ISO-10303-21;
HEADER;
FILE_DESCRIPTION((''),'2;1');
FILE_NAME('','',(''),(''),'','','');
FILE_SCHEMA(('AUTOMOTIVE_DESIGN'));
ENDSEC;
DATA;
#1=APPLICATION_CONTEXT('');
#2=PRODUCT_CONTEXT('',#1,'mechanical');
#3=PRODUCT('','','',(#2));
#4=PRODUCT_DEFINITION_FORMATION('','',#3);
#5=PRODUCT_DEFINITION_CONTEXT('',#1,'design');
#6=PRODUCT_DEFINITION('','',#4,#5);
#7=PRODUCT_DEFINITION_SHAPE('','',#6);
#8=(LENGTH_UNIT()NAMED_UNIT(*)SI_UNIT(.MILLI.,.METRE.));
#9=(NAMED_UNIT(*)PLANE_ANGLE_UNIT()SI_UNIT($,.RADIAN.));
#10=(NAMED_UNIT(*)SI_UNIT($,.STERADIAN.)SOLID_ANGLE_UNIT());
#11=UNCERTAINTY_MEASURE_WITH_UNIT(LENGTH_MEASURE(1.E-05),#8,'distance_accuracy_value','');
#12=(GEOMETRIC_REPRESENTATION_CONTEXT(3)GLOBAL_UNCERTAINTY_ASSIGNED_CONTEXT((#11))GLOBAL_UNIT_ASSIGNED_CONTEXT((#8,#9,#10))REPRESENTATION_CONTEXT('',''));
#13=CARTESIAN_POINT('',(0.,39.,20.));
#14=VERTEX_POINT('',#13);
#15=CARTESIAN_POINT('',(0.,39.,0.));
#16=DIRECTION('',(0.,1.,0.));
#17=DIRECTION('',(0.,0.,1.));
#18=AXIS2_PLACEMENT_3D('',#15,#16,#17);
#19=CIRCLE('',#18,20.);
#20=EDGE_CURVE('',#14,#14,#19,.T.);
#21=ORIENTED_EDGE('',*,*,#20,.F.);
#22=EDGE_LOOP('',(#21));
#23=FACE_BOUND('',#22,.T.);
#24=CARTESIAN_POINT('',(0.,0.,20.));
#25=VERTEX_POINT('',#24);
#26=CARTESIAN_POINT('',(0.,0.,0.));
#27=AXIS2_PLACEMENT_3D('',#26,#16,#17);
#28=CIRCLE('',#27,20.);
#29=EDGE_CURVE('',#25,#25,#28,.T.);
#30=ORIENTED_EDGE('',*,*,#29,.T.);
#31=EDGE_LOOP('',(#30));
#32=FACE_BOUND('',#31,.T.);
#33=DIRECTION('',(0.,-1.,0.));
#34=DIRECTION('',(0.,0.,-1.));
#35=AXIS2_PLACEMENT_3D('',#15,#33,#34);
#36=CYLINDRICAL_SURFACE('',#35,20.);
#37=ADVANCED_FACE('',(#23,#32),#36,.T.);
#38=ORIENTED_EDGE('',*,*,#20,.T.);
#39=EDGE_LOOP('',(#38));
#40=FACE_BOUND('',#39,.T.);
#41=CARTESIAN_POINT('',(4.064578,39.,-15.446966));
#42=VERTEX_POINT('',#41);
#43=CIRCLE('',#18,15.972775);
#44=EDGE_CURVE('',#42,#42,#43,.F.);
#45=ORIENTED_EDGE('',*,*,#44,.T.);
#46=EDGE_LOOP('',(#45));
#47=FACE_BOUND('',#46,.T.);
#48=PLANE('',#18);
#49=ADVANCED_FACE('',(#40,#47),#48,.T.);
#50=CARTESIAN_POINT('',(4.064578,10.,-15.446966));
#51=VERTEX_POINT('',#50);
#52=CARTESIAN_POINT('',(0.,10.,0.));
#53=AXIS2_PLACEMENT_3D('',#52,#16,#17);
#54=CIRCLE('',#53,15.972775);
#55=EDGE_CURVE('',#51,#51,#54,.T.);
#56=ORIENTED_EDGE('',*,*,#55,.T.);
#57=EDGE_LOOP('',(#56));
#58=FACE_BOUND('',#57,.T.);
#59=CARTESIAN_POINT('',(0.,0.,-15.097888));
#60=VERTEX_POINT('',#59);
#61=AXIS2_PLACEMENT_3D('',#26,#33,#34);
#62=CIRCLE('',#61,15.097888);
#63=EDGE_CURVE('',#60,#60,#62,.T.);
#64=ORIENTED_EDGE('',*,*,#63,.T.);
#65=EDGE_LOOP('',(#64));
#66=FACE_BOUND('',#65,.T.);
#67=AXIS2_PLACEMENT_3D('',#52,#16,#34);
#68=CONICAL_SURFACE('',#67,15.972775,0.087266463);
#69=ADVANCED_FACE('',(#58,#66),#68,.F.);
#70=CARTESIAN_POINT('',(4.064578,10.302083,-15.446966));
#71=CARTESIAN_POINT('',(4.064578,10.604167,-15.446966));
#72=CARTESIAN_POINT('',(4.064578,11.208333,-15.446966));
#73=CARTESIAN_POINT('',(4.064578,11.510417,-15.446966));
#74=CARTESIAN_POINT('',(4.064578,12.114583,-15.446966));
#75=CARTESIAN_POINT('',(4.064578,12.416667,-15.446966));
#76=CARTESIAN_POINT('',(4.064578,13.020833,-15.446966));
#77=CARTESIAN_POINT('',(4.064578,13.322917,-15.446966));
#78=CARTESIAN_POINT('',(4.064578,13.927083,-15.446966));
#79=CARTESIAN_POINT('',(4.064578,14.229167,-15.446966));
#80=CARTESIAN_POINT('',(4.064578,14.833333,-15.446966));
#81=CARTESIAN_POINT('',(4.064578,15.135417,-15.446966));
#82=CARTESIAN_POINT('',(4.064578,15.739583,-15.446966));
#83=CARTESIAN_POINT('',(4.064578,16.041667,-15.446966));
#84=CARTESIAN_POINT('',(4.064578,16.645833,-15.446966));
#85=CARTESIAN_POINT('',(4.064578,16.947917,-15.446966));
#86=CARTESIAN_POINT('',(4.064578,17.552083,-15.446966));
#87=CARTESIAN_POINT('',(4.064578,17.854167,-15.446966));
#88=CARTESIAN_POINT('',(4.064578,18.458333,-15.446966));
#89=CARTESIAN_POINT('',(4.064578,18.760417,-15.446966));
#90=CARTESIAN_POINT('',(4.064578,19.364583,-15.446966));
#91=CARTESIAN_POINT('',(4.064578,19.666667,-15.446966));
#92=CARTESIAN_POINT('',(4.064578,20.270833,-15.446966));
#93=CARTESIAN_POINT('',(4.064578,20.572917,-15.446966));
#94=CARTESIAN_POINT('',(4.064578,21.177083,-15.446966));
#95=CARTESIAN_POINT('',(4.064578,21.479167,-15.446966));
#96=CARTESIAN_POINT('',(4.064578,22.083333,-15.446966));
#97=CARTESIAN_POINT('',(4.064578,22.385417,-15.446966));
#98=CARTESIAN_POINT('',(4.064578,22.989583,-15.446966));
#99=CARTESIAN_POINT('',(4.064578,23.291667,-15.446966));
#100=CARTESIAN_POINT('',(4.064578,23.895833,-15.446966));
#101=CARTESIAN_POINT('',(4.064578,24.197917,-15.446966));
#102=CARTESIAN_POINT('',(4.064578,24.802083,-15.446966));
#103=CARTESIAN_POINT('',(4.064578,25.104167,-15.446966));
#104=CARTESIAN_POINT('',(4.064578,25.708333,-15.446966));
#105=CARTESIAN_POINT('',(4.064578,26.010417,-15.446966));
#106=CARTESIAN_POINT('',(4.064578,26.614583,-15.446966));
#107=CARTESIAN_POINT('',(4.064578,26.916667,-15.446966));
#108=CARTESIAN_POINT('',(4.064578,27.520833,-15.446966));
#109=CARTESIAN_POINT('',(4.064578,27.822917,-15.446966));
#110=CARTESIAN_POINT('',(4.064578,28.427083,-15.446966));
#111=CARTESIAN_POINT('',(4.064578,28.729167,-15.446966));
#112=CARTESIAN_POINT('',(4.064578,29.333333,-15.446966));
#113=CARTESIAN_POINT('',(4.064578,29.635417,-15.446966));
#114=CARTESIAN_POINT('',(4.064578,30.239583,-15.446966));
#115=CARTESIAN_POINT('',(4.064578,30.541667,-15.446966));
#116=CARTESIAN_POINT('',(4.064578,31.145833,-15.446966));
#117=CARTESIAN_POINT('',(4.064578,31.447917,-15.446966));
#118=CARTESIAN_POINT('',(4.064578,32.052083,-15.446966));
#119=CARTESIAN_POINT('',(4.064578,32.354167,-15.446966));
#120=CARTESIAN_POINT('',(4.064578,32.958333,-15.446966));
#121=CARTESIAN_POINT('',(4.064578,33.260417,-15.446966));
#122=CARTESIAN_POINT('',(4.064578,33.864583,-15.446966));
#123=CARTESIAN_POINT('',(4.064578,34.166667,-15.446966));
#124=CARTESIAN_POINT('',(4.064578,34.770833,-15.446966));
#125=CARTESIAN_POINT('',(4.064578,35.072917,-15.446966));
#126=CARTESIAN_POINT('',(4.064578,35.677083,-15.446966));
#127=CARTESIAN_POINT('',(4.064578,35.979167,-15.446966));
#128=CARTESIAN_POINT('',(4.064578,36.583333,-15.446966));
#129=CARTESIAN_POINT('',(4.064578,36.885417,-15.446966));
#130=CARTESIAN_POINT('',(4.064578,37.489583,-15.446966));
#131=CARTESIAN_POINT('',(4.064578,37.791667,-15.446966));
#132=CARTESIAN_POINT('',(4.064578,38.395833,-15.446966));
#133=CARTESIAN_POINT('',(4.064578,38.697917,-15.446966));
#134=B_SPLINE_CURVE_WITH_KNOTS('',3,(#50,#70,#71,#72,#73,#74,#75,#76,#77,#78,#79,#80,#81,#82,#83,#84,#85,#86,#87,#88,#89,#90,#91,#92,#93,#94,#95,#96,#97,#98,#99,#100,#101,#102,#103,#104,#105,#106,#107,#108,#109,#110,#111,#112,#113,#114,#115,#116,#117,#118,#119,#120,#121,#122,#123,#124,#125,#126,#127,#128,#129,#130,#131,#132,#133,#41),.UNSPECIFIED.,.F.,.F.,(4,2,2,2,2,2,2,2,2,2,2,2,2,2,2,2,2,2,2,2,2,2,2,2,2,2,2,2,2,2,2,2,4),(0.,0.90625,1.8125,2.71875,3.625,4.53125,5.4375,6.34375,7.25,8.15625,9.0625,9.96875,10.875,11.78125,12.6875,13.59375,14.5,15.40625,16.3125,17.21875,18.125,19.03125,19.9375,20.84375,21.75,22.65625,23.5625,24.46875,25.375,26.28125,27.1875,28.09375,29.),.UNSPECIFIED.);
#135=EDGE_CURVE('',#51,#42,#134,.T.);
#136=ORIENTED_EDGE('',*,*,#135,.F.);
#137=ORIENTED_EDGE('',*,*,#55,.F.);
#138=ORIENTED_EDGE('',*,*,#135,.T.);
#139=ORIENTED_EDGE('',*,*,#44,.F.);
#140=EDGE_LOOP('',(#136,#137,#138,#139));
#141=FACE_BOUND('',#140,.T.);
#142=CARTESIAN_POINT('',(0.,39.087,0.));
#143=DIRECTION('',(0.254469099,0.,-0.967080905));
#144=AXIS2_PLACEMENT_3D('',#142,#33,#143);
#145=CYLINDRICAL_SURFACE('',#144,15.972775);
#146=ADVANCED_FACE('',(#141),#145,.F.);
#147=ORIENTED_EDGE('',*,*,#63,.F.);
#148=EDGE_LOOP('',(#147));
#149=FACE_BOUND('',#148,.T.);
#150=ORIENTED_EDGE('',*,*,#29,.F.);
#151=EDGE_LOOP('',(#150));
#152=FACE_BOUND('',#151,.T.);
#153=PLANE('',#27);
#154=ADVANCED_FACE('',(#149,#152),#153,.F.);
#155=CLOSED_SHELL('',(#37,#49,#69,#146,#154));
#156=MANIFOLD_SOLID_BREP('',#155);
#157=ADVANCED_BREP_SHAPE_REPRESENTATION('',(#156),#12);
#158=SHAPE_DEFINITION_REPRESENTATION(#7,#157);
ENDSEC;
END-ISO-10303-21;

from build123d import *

# Parameters (mm, degrees)
BASISTEIL_SHELLV1_0_0_1_OUTLINE_R   = 20
BASISTEIL_SHELLV1_0_0_1_OUTLINE_R_2 = 15.972775
BASISTEIL_SHELLV1_0_0_1_DEPTH       = 39
SKIZZE2_R                           = 17.246382695
SKIZZE2_R_2                         = 15.972775
AUFSATZ_LINEAR_AUSTRAGEN1_DEPTH     = 10
AUFSATZ_LINEAR_AUSTRAGEN1_DRAFT     = -5


# Read off the part's stored shape, not the designer's step: Basisteil-ShellV1_0_0-1
with BuildPart() as part:
    # Basisteil-ShellV1_0_0-1 outline → Basisteil-ShellV1_0_0-1 (new body)
    with BuildSketch(Plane(origin=(0, 0, 0), x_dir=(1, 0, 0), z_dir=(0, 1, 0))):
        Circle(BASISTEIL_SHELLV1_0_0_1_OUTLINE_R)
        Circle(BASISTEIL_SHELLV1_0_0_1_OUTLINE_R_2, mode=Mode.SUBTRACT)
    extrude(amount=BASISTEIL_SHELLV1_0_0_1_DEPTH)


with BuildPart() as aufsatz_linear_austragen1_tool:
    # Skizze2 → Aufsatz-Linear austragen1 (with draft: the straight prism first)
    with BuildSketch(Plane(origin=(0, 10, 0), x_dir=(-1, 0, 0), z_dir=(0, -1, 0))):
        Circle(SKIZZE2_R)
        with Locations(Location((0, 0, 0), (0, 0, 104.742129046))):
            Circle(SKIZZE2_R_2, mode=Mode.SUBTRACT)
    extrude(amount=AUFSATZ_LINEAR_AUSTRAGEN1_DEPTH)
    # Aufsatz-Linear austragen1: the draft: its side faces are tilted about the plane it starts from
    aufsatz_linear_austragen1_sides = [aufsatz_linear_austragen1_tool.faces().sort_by_distance(p)[0] for p in [
        (17.246382695, 5, 0),
        (-4.064577659, 5, 15.44696571),
    ]]
    draft(aufsatz_linear_austragen1_sides, Plane(origin=(0, 10, 0), x_dir=(-1, 0, 0), z_dir=(0, -1, 0)), AUFSATZ_LINEAR_AUSTRAGEN1_DRAFT)


with BuildPart() as part_1:
    add(part.part)

    # Aufsatz-Linear austragen1: add aufsatz_linear_austragen1_tool
    add(aufsatz_linear_austragen1_tool.part)


solid = part_1.part
